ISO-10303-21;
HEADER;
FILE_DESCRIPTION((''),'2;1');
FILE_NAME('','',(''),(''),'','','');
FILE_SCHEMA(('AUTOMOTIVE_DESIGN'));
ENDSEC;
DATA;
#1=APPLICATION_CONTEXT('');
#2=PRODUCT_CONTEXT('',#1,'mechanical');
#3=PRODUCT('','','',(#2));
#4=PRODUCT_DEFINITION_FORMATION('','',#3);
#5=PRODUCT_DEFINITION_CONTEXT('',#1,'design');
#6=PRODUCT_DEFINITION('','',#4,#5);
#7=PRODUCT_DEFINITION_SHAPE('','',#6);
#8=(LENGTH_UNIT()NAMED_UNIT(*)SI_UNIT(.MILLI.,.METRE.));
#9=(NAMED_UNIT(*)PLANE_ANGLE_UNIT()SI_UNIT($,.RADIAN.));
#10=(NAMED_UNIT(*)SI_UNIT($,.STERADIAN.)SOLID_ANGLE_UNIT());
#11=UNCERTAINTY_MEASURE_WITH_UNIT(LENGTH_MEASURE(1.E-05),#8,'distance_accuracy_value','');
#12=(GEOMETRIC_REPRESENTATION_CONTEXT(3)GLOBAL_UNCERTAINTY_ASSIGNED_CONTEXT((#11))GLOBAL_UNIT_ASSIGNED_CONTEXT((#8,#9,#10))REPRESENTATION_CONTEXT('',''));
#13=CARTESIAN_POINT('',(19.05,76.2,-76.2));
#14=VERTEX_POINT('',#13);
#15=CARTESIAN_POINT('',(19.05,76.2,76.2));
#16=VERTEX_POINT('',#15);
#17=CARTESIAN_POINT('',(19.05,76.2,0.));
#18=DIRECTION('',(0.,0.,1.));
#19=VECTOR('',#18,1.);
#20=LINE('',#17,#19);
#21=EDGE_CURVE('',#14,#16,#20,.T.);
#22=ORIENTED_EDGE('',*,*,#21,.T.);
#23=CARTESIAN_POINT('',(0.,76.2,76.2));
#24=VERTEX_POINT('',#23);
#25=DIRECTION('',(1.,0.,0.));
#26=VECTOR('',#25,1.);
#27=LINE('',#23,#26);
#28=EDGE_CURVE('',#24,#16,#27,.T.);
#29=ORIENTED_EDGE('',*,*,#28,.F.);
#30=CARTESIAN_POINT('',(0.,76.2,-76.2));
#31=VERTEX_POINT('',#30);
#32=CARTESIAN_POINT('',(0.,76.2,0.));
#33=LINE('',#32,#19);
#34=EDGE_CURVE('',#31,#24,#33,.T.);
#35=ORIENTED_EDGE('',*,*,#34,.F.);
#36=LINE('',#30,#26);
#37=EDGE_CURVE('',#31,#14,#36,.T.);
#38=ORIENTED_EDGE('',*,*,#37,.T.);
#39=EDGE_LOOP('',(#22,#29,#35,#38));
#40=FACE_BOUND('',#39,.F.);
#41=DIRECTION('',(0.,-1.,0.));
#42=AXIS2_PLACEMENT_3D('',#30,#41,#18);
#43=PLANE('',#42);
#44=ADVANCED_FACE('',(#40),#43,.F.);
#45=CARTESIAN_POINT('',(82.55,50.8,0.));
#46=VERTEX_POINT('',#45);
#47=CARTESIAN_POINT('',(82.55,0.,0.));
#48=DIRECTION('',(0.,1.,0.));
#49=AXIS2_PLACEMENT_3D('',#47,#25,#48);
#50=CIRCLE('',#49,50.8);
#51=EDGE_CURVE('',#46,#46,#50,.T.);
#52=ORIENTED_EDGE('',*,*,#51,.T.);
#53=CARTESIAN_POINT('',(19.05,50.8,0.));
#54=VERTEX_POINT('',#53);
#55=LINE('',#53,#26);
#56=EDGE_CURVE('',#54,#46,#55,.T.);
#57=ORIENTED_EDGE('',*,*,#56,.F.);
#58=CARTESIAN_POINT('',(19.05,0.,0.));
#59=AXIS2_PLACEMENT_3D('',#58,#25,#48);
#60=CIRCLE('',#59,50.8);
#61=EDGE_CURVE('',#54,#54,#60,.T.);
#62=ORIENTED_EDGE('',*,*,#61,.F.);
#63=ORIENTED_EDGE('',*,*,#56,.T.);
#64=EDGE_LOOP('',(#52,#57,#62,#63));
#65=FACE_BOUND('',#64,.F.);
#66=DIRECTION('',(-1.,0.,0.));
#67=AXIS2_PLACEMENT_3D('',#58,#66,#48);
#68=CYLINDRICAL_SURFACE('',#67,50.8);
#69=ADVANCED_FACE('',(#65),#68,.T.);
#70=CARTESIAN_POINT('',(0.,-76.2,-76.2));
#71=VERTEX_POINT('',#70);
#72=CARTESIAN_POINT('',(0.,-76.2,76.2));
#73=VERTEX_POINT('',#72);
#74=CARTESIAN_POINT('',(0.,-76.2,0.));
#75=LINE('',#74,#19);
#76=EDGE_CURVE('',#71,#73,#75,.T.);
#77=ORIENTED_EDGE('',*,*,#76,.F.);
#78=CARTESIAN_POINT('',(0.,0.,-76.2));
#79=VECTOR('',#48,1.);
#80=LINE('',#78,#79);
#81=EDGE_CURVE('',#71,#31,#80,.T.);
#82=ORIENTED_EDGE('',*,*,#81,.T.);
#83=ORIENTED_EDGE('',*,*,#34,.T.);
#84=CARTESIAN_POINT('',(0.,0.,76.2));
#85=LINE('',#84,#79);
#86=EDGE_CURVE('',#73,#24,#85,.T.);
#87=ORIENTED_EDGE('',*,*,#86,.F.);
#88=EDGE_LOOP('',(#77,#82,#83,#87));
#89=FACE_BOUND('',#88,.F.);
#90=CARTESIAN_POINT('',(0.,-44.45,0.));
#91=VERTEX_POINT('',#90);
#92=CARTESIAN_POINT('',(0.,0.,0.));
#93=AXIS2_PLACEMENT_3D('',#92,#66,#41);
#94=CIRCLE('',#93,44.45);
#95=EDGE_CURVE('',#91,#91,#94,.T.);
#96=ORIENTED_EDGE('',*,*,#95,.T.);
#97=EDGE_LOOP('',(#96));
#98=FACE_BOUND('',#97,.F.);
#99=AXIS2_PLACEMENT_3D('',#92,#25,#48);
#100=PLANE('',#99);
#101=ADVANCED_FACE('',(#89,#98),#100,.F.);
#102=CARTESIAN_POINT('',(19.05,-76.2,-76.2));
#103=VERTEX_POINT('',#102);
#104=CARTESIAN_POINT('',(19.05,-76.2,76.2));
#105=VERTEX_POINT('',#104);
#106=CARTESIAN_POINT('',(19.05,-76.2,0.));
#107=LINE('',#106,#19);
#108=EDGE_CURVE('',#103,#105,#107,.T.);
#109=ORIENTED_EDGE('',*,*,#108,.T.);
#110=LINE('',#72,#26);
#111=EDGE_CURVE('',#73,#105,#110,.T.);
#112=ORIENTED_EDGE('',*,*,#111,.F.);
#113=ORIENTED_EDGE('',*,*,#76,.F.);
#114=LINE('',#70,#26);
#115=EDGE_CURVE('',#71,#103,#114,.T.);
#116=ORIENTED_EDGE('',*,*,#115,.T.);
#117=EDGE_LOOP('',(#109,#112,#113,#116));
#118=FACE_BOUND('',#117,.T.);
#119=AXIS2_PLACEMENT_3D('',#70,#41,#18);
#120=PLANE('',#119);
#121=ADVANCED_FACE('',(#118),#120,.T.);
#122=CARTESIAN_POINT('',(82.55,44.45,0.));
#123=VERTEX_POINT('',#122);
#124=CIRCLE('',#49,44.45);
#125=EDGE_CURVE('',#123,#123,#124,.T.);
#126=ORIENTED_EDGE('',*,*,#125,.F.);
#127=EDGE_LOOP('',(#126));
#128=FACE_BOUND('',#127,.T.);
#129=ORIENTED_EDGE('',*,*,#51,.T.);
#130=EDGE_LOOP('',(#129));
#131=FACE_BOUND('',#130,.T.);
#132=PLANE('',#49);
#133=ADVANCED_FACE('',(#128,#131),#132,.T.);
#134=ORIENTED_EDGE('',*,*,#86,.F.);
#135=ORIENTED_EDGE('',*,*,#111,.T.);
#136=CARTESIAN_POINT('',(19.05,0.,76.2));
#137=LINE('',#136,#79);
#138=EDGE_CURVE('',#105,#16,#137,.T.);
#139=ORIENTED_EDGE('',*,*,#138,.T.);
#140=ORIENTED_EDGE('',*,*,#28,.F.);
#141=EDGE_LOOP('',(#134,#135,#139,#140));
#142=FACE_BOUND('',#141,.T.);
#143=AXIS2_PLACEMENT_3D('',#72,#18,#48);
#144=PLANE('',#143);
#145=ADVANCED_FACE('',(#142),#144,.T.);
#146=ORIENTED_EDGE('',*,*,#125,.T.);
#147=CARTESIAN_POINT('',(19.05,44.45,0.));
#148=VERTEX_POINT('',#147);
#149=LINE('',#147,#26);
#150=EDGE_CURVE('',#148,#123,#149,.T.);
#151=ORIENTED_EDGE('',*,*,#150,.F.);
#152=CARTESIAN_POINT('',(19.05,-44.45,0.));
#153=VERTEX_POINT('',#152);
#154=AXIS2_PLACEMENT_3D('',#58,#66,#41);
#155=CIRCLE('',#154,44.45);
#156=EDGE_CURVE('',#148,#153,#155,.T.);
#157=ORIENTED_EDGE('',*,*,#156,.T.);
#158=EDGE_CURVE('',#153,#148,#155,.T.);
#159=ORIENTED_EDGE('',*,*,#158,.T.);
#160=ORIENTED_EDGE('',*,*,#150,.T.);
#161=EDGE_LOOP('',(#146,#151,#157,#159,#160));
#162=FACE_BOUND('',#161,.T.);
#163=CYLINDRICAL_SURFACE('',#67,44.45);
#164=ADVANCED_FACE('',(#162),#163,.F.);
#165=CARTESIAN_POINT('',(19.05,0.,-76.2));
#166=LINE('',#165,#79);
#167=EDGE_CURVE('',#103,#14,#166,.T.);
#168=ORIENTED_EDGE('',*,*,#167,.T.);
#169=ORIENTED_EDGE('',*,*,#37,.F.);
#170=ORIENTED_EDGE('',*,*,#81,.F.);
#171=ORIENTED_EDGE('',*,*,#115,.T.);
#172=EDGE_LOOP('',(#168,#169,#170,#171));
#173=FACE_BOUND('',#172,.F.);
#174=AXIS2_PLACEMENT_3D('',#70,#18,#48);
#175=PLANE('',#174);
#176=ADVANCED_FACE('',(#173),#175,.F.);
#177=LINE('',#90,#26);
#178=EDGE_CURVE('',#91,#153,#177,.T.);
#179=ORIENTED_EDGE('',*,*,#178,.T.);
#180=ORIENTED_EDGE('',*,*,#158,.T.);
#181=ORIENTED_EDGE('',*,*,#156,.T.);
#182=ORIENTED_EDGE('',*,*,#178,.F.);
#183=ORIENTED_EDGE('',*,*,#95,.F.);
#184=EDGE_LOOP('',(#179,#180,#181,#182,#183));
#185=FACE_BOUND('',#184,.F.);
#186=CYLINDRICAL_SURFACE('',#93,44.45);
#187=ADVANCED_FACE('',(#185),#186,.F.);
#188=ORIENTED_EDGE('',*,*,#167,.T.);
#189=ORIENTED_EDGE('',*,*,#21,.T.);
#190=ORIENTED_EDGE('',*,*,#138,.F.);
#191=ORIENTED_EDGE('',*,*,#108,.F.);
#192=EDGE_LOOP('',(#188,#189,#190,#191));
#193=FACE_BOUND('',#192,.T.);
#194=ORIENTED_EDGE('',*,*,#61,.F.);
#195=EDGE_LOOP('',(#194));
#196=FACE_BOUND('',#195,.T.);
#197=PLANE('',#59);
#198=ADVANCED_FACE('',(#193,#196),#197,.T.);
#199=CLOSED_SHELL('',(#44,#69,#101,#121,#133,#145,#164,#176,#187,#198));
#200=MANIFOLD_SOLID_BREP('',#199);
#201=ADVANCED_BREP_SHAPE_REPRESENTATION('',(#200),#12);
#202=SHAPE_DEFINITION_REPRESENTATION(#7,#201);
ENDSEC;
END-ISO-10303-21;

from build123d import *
from build123d import SkipClean  # not in build123d's __all__

# Parameters (mm, degrees)
F0_W     = 152.4
F0_H     = 152.4
F1_DEPTH = 19.05
F2_R     = 44.45
F3_DEPTH = 19.051
F4_R     = 50.8
F4_R_2   = 44.45
F5_DEPTH = 63.5


with BuildPart() as f1:
    # F0 (on Right) → F1 (new body)
    with BuildSketch(Plane.YZ):
        Rectangle(F0_W, F0_H)
    extrude(amount=F1_DEPTH)

    # F2 (on face) → F3 (cut, through all)
    with BuildSketch(Plane(origin=(0, 0, 0), x_dir=(0, -1, 0), z_dir=(-1, 0, 0))):
        Circle(F2_R)
    extrude(amount=-F3_DEPTH, mode=Mode.SUBTRACT)

    # F4 (on face) → F5 (join)
    with BuildSketch(Plane.YZ.offset(19.05)):
        Circle(F4_R)
        Circle(F4_R_2, mode=Mode.SUBTRACT)
    with SkipClean():  # cleaning this boolean's faces spoils the solid; the shape is the same uncleaned
        extrude(amount=F5_DEPTH)


solid = f1.part
